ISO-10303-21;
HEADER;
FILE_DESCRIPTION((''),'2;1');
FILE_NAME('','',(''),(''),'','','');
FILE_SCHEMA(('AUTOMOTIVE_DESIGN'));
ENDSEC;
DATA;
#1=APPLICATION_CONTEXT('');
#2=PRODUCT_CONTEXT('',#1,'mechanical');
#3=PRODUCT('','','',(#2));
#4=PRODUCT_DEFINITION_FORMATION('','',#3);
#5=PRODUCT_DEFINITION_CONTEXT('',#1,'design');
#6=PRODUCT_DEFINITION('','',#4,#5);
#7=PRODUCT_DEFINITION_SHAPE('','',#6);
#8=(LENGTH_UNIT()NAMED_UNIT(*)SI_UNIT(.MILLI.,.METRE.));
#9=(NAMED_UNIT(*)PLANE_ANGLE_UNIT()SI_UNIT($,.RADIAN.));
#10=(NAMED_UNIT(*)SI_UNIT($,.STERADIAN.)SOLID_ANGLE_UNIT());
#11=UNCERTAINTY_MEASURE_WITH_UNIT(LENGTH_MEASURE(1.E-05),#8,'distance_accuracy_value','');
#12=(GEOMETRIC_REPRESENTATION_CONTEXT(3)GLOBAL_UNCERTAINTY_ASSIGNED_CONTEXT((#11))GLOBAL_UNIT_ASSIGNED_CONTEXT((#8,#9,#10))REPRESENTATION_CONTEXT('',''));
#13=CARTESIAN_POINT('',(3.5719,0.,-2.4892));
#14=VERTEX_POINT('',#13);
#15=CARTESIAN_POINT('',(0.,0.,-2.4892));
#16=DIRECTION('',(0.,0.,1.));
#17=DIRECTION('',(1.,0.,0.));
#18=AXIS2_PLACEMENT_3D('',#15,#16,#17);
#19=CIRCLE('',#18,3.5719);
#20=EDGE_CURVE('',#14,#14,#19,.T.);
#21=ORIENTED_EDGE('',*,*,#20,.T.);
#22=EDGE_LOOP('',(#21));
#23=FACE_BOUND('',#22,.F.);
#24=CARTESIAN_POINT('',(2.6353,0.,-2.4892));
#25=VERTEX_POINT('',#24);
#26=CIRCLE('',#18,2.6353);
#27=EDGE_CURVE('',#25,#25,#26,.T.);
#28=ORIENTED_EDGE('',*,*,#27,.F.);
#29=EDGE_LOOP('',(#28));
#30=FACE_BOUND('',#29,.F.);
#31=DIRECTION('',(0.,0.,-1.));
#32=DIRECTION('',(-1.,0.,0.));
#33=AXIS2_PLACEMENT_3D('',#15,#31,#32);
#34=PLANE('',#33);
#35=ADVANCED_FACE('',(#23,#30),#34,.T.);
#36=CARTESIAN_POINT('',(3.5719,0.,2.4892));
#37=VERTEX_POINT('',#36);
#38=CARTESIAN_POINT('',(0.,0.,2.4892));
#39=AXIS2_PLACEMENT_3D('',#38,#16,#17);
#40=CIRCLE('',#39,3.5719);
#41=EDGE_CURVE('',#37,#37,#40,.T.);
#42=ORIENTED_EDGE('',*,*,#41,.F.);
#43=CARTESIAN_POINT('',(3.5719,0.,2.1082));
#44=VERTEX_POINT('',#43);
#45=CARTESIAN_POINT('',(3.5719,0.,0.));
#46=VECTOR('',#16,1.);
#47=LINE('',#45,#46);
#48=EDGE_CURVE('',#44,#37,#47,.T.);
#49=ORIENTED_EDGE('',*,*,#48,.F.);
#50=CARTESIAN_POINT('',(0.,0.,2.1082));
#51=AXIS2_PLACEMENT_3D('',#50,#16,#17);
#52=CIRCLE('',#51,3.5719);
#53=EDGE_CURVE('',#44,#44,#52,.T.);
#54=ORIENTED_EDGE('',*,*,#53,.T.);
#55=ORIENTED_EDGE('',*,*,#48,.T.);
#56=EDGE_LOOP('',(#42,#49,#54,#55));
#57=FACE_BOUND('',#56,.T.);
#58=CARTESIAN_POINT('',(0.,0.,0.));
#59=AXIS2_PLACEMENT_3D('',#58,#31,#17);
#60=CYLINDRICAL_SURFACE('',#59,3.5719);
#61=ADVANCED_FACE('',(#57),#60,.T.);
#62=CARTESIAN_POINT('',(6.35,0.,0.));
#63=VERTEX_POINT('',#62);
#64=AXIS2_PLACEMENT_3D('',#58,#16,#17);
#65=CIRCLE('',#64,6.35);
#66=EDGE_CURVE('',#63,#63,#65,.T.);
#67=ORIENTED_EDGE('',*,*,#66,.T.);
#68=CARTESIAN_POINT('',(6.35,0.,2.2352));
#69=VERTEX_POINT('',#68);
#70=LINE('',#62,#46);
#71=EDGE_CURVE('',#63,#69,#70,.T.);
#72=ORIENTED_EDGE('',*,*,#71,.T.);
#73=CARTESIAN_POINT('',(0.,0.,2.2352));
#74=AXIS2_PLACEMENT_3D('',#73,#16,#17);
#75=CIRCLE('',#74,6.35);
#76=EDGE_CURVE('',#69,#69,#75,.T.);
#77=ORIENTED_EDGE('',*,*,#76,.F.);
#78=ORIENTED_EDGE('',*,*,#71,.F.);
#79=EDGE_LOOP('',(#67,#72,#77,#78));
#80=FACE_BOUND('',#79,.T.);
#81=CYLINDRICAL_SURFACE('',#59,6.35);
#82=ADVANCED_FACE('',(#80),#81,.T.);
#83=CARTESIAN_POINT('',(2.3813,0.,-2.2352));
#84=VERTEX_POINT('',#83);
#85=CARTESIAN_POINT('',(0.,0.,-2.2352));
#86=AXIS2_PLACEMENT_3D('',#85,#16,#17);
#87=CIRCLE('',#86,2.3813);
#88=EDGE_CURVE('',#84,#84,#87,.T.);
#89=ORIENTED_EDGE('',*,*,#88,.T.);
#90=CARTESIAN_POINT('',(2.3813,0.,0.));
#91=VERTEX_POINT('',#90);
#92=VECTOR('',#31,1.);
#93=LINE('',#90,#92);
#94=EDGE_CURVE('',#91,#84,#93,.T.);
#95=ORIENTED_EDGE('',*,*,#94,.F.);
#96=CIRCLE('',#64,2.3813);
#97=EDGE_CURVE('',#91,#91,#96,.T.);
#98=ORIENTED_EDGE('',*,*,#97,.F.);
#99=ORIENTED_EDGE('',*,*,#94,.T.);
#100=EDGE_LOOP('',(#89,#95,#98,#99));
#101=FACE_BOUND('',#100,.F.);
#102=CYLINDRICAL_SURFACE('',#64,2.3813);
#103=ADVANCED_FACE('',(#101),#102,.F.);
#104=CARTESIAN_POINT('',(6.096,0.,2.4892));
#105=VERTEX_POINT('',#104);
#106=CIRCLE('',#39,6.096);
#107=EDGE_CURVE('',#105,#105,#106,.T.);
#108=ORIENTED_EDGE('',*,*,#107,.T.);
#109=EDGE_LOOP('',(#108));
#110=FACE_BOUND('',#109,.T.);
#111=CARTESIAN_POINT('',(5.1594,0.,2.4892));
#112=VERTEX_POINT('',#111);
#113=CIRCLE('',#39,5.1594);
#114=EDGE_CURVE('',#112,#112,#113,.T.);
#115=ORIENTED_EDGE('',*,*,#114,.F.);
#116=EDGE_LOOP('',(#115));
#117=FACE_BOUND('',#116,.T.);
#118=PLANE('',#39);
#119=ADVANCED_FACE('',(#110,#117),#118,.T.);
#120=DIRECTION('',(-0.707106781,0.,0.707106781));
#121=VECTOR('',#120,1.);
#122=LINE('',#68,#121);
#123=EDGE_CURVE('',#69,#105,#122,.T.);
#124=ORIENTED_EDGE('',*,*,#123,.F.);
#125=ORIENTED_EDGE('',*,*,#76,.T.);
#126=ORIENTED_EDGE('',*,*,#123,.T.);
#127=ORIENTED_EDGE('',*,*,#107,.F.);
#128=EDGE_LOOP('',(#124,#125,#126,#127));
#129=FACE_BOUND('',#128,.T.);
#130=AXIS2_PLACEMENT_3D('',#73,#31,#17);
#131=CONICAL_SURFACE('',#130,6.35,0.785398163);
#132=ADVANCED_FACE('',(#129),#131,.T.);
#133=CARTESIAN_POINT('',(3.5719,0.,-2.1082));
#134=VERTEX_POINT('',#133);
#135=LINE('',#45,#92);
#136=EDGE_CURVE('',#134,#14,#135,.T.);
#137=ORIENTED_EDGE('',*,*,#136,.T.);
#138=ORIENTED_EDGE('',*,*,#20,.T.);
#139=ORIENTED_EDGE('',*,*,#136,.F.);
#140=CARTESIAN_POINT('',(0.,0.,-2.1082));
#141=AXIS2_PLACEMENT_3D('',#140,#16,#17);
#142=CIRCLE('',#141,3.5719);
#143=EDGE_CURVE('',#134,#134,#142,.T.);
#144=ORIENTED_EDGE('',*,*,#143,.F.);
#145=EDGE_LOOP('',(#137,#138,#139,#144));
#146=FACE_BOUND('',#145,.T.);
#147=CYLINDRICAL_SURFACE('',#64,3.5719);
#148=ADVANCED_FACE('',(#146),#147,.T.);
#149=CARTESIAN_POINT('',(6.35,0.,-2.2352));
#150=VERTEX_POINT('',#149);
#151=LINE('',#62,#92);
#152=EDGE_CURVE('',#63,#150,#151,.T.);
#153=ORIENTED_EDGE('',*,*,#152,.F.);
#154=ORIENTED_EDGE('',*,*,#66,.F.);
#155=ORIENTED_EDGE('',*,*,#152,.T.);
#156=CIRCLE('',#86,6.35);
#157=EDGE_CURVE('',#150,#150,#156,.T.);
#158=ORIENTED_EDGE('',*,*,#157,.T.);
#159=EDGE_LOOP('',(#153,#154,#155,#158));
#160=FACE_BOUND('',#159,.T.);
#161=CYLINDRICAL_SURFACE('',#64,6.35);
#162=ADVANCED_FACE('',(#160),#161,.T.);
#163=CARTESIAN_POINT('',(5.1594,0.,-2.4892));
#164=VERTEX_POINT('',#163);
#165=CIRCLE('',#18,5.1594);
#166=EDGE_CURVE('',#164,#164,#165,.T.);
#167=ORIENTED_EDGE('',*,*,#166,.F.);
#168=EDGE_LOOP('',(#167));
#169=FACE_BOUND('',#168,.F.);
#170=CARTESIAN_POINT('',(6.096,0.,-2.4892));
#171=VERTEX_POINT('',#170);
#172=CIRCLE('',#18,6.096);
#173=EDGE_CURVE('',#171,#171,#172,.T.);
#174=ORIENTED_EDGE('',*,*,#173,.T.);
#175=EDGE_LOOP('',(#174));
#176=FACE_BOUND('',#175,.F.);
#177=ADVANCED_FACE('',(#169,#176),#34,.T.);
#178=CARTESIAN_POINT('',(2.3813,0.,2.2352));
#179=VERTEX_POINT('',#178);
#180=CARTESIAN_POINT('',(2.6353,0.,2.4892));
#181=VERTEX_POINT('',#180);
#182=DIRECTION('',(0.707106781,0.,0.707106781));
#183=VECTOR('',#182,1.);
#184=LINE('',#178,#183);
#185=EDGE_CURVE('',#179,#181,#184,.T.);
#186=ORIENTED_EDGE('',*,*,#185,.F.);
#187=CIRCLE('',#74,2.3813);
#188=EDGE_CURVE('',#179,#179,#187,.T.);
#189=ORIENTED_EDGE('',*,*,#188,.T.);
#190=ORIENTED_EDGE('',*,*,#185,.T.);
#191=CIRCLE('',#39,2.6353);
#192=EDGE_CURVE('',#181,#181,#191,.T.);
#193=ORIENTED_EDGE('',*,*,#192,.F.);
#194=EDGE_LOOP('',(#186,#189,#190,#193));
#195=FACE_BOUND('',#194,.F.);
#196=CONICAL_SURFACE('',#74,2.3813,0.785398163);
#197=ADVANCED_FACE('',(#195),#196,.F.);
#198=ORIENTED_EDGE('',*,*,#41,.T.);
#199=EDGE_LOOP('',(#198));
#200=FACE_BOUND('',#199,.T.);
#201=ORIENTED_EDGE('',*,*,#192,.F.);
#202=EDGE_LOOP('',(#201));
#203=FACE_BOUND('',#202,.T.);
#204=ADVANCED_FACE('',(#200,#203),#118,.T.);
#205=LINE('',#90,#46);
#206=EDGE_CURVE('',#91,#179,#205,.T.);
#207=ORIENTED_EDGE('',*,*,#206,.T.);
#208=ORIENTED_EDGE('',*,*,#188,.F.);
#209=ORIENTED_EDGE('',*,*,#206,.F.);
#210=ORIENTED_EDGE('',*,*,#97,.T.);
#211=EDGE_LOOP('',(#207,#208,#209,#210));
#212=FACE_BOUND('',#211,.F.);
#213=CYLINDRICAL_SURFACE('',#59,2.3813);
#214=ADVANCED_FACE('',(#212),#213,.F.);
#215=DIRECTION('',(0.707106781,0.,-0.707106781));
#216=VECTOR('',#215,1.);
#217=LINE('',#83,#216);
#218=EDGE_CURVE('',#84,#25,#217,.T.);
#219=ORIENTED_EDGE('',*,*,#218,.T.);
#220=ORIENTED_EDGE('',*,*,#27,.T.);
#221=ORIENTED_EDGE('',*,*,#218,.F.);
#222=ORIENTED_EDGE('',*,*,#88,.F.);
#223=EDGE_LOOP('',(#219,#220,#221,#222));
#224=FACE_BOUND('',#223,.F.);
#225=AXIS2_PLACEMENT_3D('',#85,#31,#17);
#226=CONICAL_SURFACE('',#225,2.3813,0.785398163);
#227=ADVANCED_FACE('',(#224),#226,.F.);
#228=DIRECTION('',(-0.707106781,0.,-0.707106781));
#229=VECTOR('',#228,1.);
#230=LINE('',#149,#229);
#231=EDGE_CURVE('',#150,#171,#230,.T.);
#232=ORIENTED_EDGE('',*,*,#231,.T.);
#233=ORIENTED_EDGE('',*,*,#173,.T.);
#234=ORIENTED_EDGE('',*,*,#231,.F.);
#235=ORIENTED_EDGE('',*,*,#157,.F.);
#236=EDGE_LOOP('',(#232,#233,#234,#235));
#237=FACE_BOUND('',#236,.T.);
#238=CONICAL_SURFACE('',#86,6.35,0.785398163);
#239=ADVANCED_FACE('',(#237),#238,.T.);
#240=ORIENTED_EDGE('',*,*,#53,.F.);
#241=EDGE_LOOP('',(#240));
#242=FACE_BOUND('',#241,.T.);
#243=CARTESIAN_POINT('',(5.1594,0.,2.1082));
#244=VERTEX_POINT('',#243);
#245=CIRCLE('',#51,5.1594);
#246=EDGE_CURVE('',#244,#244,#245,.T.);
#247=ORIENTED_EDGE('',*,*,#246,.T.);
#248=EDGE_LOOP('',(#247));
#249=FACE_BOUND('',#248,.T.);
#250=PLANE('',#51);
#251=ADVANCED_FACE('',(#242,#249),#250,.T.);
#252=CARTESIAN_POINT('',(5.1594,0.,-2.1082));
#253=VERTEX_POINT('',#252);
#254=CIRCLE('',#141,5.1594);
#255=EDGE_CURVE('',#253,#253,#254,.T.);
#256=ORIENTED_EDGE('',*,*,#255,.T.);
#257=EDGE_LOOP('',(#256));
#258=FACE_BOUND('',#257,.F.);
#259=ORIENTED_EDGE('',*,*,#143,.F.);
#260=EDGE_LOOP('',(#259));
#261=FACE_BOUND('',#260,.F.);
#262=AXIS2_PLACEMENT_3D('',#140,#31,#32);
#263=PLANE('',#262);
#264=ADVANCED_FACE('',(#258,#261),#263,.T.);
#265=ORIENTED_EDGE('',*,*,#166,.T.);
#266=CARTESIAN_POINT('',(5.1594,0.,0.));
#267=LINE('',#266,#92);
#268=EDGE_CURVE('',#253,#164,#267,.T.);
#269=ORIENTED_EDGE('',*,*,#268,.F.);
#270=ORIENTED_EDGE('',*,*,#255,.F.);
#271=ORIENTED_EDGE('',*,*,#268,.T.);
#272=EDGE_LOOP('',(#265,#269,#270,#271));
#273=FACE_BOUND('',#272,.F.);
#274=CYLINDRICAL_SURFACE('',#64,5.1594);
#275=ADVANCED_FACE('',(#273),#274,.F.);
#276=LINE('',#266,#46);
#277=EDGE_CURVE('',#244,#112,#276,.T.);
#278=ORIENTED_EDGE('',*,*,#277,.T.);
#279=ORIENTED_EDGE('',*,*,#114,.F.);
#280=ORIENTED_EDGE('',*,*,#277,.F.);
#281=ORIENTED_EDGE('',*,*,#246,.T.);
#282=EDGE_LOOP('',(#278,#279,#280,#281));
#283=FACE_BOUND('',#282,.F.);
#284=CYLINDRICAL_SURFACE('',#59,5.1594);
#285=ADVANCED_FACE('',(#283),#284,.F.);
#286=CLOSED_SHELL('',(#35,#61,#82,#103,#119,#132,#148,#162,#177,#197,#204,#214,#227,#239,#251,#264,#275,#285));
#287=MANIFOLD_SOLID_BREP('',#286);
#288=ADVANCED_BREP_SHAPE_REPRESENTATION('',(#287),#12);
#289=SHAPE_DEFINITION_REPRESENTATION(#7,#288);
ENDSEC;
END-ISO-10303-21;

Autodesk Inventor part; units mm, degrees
ref_plane "YZ Plane" through (0, 0, 0) normal (1, 0, 0) x (0, 1, 0)
ref_plane "XZ Plane" through (0, 0, 0) normal (0, 1, 0) x (-1, 0, 0)
ref_plane "XY Plane" through (0, 0, 0) normal (0, 0, 1) x (1, 0, 0)
sketch "Sketch1" plane through (0, 0, 0) normal (0, 0, 1) x (1, 0, 0)
  circle A0 centre (0, 0) radius 6.35
  circle A1 centre (0, 0) radius 2.3813
  circle A2 centre (0, 0) radius 3.5719
  circle A3 centre (0, 0) radius 5.1594
  dimension "d0" = 12.7
  dimension "d1" = 4.7625
  dimension "d2" = 7.1437
  dimension "d3" = 10.3187
extrude "Extrusion1" add sketch "Sketch1" along normal blind 2.4892
extrude "Extrusion2" add sketch "Sketch1" along normal blind 2.1082 contours A3
chamfer "Chamfer1" distance 0.254 angle 45 2 edges at (-6.35, 0, 2.4892) (-2.3813, 0, 2.4892)
mirror "Mirror1" about plane through (0, 0, 0) normal (0, 0, -1)
properties part number "R3-2RS"
